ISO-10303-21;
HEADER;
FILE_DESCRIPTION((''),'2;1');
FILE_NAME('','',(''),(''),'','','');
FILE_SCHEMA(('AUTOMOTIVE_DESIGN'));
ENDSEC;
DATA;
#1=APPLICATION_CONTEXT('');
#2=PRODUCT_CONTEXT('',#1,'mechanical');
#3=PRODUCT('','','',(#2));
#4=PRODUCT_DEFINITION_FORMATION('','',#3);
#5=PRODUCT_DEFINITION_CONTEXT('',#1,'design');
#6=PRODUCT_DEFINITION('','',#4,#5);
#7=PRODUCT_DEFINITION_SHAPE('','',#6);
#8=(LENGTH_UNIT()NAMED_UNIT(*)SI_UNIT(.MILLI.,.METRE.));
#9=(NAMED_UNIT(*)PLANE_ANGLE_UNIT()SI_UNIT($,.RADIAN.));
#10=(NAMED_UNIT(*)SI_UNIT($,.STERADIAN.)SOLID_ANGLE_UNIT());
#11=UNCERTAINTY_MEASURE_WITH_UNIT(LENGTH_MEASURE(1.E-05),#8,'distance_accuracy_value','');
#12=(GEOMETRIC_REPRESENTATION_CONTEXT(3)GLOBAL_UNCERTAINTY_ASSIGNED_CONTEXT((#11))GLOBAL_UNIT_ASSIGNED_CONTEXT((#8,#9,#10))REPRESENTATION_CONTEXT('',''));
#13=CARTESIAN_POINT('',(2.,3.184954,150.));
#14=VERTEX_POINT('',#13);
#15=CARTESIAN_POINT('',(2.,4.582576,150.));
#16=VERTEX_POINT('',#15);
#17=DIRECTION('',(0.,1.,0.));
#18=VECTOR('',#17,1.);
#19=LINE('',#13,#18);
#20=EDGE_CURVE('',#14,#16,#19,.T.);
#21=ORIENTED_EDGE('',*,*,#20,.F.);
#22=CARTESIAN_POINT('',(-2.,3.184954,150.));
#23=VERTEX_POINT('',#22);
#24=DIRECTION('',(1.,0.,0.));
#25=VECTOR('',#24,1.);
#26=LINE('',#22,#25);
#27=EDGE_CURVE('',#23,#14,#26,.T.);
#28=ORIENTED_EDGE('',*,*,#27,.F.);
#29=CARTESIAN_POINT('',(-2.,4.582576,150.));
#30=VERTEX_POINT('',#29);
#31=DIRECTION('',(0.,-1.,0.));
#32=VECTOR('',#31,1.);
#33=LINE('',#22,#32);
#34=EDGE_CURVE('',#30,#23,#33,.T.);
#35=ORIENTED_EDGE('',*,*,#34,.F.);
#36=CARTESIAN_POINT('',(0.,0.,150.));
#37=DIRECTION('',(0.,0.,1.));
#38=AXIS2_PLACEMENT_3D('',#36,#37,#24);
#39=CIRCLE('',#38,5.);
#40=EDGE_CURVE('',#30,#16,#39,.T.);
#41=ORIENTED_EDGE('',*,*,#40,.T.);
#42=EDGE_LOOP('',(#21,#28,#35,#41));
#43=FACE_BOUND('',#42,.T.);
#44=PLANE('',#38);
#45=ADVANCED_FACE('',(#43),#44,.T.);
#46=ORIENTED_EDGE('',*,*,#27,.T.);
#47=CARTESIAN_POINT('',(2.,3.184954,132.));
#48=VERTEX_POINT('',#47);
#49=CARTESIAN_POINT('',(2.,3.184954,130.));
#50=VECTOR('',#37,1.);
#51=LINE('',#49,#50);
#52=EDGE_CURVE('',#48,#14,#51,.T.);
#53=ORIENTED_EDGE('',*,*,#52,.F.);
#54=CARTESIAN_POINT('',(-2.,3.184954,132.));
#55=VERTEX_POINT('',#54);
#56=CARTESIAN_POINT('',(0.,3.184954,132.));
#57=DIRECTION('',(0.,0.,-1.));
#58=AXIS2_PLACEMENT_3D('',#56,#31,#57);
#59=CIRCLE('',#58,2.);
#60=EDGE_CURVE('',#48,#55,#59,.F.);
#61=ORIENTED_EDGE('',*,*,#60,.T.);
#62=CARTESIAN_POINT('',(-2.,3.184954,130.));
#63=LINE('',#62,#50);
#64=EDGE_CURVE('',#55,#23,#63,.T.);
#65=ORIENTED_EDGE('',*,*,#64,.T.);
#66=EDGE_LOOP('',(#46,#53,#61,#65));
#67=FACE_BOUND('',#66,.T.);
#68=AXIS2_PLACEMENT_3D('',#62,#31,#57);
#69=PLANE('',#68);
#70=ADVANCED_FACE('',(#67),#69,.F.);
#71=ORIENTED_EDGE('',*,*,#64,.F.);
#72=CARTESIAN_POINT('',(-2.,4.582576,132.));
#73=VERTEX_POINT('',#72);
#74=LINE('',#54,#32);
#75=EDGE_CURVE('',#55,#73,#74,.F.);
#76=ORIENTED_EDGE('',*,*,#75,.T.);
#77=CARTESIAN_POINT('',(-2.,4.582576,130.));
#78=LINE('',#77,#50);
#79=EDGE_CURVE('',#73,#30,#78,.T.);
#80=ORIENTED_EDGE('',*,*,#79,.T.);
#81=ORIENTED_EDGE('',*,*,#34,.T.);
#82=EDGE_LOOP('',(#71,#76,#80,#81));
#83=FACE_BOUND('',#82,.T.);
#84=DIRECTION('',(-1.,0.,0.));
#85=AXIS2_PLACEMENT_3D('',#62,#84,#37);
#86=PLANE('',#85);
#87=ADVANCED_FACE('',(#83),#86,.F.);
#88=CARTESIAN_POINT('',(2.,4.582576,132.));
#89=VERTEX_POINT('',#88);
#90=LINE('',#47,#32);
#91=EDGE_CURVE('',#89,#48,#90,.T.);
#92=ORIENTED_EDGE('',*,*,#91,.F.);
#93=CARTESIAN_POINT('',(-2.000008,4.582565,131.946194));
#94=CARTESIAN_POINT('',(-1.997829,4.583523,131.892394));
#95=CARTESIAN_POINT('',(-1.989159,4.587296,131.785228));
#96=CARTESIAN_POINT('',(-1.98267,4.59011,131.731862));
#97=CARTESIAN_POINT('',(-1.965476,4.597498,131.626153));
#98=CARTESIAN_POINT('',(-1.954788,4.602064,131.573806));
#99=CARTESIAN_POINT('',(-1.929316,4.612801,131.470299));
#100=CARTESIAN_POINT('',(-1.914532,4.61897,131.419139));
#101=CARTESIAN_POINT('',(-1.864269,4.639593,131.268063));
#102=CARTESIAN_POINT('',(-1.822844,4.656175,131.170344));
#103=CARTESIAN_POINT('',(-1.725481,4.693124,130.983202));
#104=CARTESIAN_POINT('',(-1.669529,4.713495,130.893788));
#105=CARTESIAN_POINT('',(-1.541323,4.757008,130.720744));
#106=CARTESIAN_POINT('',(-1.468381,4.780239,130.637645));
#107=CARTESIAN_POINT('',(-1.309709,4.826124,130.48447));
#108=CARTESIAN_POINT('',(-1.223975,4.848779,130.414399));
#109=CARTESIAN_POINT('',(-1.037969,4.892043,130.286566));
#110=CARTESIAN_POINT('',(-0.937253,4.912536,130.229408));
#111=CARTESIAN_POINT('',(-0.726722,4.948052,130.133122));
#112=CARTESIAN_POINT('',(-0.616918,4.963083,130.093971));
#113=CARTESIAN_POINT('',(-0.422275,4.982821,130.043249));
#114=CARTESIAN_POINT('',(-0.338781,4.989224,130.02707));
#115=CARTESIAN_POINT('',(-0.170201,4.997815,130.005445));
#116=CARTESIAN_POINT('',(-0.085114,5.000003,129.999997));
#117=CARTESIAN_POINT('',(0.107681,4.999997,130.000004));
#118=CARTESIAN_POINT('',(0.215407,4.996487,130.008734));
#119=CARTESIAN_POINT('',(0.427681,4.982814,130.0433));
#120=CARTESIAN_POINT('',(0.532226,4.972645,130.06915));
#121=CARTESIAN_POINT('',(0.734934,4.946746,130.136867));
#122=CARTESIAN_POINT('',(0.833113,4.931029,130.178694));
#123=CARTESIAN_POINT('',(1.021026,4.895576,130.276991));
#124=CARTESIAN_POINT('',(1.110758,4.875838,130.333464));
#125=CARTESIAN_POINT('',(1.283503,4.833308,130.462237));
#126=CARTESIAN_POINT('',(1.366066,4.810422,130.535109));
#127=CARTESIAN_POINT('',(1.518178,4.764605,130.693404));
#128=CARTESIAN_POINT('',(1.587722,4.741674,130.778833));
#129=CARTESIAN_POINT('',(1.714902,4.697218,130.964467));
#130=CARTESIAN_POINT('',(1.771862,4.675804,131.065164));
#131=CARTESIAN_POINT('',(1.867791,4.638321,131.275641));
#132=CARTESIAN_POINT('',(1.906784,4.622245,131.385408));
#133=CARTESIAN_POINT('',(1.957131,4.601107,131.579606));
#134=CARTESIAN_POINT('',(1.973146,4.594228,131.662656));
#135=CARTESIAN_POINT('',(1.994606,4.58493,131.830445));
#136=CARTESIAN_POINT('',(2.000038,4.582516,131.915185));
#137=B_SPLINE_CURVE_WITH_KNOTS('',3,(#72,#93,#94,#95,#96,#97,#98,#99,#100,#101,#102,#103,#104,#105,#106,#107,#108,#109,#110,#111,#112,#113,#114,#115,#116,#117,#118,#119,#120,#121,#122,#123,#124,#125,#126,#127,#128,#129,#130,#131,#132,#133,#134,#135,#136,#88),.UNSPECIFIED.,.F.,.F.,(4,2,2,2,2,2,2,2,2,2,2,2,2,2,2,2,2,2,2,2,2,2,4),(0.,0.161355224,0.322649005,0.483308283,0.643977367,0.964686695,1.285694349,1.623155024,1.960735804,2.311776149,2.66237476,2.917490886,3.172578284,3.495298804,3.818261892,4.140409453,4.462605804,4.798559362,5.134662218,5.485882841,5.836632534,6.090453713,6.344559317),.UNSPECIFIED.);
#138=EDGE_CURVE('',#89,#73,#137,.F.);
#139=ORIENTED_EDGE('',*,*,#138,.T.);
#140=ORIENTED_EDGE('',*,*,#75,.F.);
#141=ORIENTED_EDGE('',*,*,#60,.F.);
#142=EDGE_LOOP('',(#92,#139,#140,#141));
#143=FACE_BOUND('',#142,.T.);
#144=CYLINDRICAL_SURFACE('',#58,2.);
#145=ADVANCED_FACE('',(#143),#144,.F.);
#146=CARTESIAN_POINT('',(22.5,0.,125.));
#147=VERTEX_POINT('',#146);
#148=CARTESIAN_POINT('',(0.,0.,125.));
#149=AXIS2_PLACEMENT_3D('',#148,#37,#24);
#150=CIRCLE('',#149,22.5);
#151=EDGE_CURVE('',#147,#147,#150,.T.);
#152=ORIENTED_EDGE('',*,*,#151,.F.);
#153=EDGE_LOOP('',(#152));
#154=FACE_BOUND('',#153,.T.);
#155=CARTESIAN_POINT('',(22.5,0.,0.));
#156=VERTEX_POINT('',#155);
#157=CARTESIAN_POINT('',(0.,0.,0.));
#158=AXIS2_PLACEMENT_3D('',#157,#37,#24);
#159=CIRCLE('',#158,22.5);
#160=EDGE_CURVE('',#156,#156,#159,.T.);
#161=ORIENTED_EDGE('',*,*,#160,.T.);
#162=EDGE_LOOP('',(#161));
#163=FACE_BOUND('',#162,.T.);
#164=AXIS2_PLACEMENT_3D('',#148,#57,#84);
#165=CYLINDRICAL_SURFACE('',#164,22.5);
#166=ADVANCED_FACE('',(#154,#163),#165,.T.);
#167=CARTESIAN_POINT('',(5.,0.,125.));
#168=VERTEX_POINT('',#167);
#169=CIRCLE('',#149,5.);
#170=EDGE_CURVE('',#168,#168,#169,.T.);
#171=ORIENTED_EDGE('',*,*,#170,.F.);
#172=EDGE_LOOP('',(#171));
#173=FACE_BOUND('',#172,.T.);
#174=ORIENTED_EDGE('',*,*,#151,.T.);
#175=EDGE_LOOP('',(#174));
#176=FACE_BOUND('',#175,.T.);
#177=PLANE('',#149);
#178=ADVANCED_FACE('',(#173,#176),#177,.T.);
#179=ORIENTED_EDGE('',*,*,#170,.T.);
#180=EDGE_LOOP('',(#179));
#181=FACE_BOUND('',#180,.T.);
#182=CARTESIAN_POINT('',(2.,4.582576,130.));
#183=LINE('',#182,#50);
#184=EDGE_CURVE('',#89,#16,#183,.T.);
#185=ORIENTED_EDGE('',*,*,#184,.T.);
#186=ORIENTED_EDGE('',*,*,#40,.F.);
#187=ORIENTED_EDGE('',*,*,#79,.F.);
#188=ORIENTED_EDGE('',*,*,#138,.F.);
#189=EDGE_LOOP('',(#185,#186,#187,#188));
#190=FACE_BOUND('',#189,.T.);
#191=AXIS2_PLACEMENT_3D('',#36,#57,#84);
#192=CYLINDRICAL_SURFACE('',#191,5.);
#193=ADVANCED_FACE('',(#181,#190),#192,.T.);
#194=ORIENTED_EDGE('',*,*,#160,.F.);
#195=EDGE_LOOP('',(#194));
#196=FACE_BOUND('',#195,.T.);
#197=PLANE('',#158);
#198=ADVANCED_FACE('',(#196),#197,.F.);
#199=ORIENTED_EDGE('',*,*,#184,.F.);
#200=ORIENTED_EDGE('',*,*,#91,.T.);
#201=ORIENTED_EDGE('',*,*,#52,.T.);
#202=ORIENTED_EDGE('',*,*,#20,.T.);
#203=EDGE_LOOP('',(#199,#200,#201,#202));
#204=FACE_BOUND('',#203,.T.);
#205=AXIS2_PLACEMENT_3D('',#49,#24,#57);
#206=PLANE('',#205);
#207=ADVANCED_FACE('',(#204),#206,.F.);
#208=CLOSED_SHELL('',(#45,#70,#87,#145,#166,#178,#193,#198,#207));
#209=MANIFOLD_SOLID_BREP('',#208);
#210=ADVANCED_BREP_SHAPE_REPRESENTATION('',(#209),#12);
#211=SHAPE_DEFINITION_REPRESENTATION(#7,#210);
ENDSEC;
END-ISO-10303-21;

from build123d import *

# Parameters (mm, degrees)
SKETCH1_R           = 22.5
BOSS_EXTRUDE1_DEPTH = 125
SKETCH3_R           = 5
BOSS_EXTRUDE2_DEPTH = 25
CUT_EXTRUDE1_START  = -20
CUT_EXTRUDE1_DEPTH  = 20
FILLET1_R           = 2


with BuildPart() as part:
    # Sketch1 → Boss-Extrude1 (new body)
    with BuildSketch(Plane.XY):
        Circle(SKETCH1_R)
    extrude(amount=BOSS_EXTRUDE1_DEPTH)

    # Sketch3 → Boss-Extrude2 (add)
    with BuildSketch(Plane.XY.offset(125)):
        Circle(SKETCH3_R)
    extrude(amount=BOSS_EXTRUDE2_DEPTH)

    # Sketch4 → Cut-Extrude1 (cut)
    with BuildSketch(Plane.XY.offset(150).offset(CUT_EXTRUDE1_START)):
        with BuildLine():
            Line((-2, 3.184954178), (2, 3.184954178))
            Line((2, 3.184954178), (2, 4.582575695))
            ThreePointArc((2, 4.582575695), (0, 5), (-2, 4.582575695))
            Line((-2, 4.582575695), (-2, 3.184954178))
        make_face()
    extrude(amount=CUT_EXTRUDE1_DEPTH, mode=Mode.SUBTRACT)

    # Fillet1
    fillet1_edges = [part.edges().sort_by_distance(p)[0] for p in [
        (-2, 3.883764937, 130),
        (2, 3.883764937, 130),
    ]]
    fillet(fillet1_edges, radius=FILLET1_R - 0.0001)  # a hair under: the kernel refuses the full size


solid = part.part
